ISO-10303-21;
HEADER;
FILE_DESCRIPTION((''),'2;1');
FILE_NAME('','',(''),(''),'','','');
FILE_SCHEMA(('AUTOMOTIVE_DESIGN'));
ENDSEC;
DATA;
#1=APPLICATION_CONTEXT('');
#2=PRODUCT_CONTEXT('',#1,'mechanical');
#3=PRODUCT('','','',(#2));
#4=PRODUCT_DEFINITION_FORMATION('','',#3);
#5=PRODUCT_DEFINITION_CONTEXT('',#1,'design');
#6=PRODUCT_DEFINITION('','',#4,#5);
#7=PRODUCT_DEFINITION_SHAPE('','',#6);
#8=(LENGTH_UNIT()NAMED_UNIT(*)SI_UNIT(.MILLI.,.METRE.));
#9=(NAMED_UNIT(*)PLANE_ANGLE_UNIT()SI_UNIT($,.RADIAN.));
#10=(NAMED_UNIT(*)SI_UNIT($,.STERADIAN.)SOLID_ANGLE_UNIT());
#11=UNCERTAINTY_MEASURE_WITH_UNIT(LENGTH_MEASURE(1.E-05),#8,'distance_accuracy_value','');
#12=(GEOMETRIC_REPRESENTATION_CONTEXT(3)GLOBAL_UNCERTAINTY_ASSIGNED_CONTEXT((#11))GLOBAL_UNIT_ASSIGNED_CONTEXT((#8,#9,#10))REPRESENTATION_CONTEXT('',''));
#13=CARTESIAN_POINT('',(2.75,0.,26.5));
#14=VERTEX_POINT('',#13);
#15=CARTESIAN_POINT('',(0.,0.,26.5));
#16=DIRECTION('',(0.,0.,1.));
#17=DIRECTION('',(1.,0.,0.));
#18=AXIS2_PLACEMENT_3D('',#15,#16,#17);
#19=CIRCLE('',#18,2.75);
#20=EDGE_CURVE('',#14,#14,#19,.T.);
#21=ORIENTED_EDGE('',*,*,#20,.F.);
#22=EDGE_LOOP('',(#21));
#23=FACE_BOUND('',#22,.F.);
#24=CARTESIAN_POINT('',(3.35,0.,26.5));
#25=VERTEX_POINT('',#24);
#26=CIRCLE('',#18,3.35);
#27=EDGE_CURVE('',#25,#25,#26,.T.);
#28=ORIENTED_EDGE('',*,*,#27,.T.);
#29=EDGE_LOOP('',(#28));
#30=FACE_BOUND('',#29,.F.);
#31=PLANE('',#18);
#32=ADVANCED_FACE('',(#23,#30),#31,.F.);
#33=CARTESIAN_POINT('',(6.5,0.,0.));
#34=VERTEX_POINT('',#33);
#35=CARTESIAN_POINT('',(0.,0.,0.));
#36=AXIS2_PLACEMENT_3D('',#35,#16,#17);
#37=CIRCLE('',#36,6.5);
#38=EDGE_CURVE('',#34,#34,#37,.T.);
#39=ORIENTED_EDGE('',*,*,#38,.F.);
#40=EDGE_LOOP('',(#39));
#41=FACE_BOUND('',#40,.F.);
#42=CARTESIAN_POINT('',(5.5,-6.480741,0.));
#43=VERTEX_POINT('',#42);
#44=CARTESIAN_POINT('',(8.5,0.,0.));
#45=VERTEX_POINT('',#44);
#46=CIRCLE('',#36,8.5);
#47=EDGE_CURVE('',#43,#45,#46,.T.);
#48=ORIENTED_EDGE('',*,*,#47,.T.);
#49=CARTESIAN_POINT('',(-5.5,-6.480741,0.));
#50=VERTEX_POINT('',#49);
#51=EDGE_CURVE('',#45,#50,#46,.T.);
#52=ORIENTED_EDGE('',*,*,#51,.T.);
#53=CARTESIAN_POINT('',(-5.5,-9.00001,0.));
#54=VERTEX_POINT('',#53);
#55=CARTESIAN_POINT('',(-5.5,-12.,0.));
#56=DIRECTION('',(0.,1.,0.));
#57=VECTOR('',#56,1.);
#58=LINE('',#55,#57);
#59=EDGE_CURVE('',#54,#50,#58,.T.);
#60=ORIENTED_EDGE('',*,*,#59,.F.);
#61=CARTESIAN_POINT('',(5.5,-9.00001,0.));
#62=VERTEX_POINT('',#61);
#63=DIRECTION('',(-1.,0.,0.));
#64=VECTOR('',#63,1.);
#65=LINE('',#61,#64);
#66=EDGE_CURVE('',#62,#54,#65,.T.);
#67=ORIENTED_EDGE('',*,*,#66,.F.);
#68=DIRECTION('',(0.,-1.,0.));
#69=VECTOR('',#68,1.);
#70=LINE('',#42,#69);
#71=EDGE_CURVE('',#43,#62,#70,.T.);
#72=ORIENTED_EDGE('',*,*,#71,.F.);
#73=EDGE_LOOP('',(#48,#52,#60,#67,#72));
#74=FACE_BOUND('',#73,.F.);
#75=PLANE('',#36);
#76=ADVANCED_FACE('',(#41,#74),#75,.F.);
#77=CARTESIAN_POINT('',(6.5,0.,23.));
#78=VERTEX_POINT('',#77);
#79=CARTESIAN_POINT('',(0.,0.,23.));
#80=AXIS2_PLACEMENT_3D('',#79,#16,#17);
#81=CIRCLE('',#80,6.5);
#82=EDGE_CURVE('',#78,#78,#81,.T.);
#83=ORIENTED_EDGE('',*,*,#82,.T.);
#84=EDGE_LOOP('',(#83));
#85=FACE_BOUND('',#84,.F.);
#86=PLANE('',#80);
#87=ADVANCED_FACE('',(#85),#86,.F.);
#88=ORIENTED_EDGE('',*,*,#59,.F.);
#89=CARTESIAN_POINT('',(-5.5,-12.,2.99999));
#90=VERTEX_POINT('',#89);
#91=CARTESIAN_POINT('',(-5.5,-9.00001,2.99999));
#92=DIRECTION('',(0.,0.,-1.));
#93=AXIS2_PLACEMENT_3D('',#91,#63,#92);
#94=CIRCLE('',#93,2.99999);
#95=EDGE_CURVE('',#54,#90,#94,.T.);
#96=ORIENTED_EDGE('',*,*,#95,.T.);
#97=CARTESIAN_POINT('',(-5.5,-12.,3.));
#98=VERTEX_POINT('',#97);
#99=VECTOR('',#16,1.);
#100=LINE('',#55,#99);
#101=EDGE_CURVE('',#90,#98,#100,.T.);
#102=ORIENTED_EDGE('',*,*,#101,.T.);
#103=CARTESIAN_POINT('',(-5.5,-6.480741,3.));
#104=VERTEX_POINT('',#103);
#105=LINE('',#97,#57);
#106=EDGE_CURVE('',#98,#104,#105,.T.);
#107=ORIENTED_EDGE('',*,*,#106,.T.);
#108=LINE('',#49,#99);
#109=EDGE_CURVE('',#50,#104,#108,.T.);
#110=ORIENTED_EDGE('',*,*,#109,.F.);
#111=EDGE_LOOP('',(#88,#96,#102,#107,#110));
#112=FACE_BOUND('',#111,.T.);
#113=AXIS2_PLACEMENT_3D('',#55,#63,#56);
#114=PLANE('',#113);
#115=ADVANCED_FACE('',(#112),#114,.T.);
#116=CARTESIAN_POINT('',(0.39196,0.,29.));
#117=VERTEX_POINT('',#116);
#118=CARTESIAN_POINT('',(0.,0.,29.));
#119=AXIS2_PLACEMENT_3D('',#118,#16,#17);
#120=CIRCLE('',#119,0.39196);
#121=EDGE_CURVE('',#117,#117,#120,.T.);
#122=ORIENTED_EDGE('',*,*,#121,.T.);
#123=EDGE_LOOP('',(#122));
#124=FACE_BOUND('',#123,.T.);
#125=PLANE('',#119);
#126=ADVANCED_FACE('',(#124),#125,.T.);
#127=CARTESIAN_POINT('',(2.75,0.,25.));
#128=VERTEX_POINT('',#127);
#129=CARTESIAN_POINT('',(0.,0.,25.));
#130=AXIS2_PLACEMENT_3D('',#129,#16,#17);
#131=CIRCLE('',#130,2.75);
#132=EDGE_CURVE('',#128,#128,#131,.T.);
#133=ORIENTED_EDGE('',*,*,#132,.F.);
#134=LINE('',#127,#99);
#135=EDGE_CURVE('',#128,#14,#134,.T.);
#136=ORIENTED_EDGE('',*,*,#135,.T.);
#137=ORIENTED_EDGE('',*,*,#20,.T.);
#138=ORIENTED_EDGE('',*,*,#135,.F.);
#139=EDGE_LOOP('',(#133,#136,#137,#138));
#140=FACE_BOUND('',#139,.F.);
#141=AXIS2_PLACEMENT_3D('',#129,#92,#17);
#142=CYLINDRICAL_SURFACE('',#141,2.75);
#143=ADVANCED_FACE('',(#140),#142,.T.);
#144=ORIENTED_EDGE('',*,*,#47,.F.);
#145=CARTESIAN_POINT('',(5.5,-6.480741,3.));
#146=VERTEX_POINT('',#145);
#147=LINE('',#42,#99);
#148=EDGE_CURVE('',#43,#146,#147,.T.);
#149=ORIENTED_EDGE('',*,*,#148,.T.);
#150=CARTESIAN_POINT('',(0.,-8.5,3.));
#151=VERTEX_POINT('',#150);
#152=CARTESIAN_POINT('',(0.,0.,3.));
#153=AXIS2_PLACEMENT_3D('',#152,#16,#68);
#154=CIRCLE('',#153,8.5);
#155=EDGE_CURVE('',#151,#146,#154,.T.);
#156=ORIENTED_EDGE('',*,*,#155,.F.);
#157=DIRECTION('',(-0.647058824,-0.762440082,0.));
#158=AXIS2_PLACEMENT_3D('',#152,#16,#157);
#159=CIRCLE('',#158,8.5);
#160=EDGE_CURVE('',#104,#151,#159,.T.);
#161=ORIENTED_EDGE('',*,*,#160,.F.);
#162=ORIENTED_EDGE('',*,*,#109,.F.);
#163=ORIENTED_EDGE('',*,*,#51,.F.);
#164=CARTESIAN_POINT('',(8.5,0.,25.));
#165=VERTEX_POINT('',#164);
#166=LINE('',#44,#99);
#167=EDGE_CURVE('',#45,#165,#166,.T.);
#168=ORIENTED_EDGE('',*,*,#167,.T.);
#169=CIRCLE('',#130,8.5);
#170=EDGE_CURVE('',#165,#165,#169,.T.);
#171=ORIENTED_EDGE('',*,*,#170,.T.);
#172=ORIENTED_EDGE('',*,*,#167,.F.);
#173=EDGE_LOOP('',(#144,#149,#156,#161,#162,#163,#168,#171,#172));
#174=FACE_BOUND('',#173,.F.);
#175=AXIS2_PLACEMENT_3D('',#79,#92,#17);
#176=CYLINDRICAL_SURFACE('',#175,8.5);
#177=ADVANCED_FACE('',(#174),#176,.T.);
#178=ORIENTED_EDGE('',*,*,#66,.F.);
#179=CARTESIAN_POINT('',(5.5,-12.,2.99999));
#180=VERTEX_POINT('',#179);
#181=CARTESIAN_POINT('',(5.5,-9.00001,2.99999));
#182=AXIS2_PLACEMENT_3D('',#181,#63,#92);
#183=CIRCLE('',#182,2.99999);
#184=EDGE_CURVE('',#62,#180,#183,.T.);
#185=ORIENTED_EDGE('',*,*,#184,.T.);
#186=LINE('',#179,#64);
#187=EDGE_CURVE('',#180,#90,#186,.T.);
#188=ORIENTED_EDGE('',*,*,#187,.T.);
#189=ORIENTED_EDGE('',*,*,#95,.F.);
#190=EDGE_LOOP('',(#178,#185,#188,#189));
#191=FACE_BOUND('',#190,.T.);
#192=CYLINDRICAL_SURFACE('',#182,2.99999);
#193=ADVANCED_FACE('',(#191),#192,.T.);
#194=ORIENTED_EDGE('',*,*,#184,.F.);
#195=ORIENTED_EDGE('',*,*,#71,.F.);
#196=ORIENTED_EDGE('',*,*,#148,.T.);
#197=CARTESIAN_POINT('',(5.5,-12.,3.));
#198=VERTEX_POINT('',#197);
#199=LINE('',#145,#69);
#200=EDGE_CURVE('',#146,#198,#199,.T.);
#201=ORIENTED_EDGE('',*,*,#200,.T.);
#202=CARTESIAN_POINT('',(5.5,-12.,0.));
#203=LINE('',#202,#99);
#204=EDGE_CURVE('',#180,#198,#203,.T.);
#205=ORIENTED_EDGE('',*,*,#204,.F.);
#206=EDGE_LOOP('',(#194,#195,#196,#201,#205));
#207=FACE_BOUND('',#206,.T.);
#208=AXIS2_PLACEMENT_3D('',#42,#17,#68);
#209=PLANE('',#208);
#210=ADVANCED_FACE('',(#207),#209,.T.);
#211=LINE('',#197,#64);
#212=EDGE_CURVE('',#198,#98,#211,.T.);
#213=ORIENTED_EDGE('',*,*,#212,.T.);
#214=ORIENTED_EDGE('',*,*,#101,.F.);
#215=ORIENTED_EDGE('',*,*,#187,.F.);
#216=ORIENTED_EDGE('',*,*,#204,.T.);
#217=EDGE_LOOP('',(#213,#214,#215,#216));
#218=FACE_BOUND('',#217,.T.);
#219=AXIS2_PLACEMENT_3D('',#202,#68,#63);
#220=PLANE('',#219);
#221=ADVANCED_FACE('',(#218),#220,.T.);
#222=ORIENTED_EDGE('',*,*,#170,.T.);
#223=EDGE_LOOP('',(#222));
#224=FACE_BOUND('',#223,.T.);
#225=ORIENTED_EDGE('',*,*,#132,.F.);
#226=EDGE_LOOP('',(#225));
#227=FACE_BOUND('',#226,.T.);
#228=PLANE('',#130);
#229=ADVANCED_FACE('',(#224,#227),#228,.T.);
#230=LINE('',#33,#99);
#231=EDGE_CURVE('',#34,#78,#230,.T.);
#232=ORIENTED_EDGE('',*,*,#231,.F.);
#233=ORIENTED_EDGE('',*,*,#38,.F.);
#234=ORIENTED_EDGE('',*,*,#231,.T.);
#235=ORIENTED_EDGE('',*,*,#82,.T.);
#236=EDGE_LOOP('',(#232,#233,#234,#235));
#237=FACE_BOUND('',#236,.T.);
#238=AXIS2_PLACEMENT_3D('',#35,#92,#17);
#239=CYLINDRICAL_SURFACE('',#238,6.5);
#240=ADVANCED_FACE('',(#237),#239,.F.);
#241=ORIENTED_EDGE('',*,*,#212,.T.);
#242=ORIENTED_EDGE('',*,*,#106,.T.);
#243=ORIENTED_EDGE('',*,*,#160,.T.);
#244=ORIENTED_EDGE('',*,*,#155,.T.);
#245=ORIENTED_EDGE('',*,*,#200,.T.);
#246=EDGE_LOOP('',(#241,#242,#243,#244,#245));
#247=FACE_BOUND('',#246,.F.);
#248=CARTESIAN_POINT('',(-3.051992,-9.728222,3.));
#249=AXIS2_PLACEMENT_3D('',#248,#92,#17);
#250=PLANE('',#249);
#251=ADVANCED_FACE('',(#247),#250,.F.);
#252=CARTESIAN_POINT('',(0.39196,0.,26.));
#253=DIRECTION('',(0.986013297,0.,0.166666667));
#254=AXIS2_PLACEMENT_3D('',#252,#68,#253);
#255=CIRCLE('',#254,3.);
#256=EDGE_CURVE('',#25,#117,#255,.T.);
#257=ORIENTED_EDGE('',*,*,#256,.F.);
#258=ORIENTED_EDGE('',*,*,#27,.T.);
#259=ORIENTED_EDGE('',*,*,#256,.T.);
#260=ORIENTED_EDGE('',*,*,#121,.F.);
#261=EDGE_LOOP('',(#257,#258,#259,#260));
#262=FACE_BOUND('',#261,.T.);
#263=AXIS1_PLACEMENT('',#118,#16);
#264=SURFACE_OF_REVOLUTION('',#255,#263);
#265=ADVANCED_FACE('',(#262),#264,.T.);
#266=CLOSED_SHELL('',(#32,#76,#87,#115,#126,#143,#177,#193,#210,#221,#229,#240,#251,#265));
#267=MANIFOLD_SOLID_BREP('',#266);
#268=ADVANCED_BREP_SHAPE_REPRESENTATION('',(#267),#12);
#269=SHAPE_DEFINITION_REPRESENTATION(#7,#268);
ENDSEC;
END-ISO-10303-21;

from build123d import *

# Parameters (mm, degrees)
F0_R      = 8.5
F0_R_2    = 6.5
F1_DEPTH  = 23
F2_R      = 8.5
F3_DEPTH  = 2
F5_DEPTH  = 3
F6_R      = 2.99999
F7_R      = 2.75
F8_DEPTH  = 1.5
F9_R      = 3.35
F10_DEPTH = 2.5


# Not quite as in the source:
# - a fillet or chamfer that OpenCascade refuses, or shapes differently, is made with other operations: its cross-section is extruded or revolved along the edge and cut away or added
# - a fillet or chamfer is up to 0.001 mm smaller than in the source, because OpenCascade refuses the exact size


with BuildPart() as f1:
    # F0 (on Top) → F1 (new body)
    with BuildSketch(Plane.XY):
        Circle(F0_R)
        Circle(F0_R_2, mode=Mode.SUBTRACT)
    extrude(amount=F1_DEPTH)

    # F2 (on face) → F3 (join)
    with BuildSketch(Plane.XY.offset(23)):
        Circle(F2_R)
    extrude(amount=F3_DEPTH)

    # F4 (on face) → F5 (join)
    with BuildSketch(Plane(origin=(0, 0, 0), x_dir=(1, 0, 0), z_dir=(0, 0, -1))):
        with BuildLine():
            ThreePointArc((-5.5, 6.4807406984), (-2.9294798227, 7.9792322919), (0, 8.5))
            Line((0, 8.5), (0, 12))
            Line((0, 12), (-5.5, 12))
            Line((-5.5, 12), (-5.5, 6.4807406984))
        make_face()
        with BuildLine():
            Line((0, 12), (0, 8.5))
            ThreePointArc((0, 8.5), (2.9294798227, 7.9792322919), (5.5, 6.4807406984))
            Line((5.5, 6.4807406984), (5.5, 12))
            Line((5.5, 12), (0, 12))
        make_face()
    extrude(amount=-F5_DEPTH)

    # F6 (radius 3 in the source; OpenCascade refuses exactly that, so slightly less here)
    f6_edges = [f1.edges().sort_by_distance(p)[0] for p in [
        (0, -12, 0),
    ]]
    fillet(f6_edges, radius=F6_R)

    # F7 (on face) → F8 (join)
    with BuildSketch(Plane.XY.offset(25)):
        Circle(F7_R)
    extrude(amount=F8_DEPTH)

    # F9 (on face) → F10 (join)
    with BuildSketch(Plane.XY.offset(26.5)):
        Circle(F9_R)
    extrude(amount=F10_DEPTH)

    # F11: fillet of radius 3 on 1 edges, made by hand

    # F11_s1 → F11_t2 (revolve, cut)
    with BuildSketch(Plane.XZ):
        with BuildLine():
            ThreePointArc((3.35, 26.5), (2.3284517816, 28.2912878475), (0.3919601084, 29))
            Line((0.3919601084, 29), (3.35, 29))
            Line((3.35, 29), (3.35, 26.5))
        make_face()
    revolve(axis=Axis((0, 0, 29), (0, 0, 1)), mode=Mode.SUBTRACT)


solid = f1.part
